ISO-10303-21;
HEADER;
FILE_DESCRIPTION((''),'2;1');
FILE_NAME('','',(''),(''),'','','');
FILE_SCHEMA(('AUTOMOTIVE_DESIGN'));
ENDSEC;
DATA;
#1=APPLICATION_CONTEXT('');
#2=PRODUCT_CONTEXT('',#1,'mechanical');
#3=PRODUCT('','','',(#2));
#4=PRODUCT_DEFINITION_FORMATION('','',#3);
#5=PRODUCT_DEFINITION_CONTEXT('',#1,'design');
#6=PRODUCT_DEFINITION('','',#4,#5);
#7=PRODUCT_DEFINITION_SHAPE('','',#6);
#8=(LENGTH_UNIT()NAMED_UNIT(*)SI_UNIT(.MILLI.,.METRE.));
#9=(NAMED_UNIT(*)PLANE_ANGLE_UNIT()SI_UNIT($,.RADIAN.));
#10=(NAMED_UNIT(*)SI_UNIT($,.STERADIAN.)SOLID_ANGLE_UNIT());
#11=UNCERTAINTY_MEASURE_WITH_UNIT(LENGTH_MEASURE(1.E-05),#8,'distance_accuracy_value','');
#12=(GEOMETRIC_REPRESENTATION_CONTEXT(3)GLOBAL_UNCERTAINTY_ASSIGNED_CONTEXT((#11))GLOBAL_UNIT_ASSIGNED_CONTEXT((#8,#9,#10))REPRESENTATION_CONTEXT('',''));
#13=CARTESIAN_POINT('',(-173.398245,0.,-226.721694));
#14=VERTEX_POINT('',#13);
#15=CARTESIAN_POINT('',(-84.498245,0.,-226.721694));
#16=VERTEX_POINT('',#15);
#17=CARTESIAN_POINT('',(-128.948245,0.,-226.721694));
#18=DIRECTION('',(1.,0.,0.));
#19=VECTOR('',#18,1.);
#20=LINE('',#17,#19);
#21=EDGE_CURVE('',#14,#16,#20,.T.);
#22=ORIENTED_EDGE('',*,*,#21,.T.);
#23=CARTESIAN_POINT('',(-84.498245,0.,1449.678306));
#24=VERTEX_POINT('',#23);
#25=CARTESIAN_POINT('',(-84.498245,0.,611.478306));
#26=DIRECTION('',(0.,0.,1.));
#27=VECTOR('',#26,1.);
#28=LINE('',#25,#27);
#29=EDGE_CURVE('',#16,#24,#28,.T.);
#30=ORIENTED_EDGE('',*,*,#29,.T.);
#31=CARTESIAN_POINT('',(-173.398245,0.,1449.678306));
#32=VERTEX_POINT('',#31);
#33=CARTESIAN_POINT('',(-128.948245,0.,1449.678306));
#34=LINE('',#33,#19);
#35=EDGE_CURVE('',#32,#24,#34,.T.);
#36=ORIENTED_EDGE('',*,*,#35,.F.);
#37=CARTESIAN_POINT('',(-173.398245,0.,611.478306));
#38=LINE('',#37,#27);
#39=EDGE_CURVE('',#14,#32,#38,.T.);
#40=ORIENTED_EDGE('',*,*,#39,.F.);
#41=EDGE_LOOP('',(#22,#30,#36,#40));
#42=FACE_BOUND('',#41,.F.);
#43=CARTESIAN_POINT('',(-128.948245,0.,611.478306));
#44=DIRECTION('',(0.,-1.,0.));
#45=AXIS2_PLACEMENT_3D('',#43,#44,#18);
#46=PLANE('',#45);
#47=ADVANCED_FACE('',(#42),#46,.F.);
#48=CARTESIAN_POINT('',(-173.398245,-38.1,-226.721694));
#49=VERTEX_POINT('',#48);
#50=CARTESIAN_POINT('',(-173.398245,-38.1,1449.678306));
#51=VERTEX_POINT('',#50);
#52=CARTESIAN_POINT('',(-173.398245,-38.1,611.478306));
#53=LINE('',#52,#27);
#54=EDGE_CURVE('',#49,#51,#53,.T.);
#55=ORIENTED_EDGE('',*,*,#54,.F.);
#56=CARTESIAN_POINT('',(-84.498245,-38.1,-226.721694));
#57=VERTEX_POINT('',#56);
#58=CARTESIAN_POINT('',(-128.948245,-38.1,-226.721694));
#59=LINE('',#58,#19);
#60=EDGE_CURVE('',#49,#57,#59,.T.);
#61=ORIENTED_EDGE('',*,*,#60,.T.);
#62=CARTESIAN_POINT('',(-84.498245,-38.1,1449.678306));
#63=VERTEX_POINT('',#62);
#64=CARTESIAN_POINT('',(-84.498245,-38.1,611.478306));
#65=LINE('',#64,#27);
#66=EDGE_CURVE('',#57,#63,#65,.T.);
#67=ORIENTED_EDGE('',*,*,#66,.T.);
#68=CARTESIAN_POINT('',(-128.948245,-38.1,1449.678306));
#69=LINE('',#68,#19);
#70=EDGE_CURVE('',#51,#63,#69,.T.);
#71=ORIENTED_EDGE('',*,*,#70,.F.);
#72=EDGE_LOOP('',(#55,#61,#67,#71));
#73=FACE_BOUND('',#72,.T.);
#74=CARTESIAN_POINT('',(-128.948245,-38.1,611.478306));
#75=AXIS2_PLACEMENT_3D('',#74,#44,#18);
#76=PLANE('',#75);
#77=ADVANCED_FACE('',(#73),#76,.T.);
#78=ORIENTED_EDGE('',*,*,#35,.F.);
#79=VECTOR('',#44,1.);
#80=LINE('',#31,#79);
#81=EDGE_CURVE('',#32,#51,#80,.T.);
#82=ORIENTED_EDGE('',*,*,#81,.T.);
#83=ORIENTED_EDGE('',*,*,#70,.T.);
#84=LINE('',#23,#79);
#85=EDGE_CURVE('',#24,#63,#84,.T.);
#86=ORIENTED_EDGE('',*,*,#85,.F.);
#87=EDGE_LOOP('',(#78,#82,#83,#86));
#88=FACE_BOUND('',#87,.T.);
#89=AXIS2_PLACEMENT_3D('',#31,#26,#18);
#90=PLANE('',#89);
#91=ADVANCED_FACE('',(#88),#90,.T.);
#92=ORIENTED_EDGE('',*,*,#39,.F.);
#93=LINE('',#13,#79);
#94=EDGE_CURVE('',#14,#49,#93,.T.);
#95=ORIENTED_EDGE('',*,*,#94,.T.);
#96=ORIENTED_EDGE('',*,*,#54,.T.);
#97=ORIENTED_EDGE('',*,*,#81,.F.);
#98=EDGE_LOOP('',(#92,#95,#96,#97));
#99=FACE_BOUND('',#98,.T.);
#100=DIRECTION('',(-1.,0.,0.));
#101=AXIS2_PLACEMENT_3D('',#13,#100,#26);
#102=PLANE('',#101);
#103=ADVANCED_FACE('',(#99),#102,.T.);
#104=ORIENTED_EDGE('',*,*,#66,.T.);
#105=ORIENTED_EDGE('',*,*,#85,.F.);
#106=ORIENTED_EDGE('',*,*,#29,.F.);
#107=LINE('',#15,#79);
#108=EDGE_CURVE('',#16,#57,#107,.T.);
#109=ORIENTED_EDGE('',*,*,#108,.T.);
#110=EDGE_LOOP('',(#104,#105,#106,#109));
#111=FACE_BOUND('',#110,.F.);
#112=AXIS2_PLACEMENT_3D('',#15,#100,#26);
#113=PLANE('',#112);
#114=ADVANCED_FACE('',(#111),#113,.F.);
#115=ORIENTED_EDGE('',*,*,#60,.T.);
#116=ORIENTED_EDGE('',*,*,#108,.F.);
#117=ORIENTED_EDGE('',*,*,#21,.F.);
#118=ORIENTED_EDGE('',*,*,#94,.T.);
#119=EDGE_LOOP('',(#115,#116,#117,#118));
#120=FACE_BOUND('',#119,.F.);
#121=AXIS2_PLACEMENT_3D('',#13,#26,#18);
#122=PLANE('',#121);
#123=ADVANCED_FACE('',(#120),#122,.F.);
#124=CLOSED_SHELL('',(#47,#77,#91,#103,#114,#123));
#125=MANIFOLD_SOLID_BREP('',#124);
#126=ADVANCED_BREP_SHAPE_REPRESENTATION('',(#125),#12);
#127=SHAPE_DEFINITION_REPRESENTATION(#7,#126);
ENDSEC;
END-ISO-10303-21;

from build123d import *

# Parameters (mm, degrees)
F1_W     = 88.9
F1_H     = 1676.4
F2_DEPTH = 38.1


# Not quite as in the source:
# - a variable given as a bare number and used for a length is read in inches; the dataset says mm whatever the document's units were


with BuildPart() as f2:
    # F1 (on Front) → F2 (new body)
    with BuildSketch(Plane.XZ):
        with Locations((-128.9482451975, 611.4783063787)):
            Rectangle(F1_W, F1_H)
    extrude(amount=F2_DEPTH)


solid = f2.part
